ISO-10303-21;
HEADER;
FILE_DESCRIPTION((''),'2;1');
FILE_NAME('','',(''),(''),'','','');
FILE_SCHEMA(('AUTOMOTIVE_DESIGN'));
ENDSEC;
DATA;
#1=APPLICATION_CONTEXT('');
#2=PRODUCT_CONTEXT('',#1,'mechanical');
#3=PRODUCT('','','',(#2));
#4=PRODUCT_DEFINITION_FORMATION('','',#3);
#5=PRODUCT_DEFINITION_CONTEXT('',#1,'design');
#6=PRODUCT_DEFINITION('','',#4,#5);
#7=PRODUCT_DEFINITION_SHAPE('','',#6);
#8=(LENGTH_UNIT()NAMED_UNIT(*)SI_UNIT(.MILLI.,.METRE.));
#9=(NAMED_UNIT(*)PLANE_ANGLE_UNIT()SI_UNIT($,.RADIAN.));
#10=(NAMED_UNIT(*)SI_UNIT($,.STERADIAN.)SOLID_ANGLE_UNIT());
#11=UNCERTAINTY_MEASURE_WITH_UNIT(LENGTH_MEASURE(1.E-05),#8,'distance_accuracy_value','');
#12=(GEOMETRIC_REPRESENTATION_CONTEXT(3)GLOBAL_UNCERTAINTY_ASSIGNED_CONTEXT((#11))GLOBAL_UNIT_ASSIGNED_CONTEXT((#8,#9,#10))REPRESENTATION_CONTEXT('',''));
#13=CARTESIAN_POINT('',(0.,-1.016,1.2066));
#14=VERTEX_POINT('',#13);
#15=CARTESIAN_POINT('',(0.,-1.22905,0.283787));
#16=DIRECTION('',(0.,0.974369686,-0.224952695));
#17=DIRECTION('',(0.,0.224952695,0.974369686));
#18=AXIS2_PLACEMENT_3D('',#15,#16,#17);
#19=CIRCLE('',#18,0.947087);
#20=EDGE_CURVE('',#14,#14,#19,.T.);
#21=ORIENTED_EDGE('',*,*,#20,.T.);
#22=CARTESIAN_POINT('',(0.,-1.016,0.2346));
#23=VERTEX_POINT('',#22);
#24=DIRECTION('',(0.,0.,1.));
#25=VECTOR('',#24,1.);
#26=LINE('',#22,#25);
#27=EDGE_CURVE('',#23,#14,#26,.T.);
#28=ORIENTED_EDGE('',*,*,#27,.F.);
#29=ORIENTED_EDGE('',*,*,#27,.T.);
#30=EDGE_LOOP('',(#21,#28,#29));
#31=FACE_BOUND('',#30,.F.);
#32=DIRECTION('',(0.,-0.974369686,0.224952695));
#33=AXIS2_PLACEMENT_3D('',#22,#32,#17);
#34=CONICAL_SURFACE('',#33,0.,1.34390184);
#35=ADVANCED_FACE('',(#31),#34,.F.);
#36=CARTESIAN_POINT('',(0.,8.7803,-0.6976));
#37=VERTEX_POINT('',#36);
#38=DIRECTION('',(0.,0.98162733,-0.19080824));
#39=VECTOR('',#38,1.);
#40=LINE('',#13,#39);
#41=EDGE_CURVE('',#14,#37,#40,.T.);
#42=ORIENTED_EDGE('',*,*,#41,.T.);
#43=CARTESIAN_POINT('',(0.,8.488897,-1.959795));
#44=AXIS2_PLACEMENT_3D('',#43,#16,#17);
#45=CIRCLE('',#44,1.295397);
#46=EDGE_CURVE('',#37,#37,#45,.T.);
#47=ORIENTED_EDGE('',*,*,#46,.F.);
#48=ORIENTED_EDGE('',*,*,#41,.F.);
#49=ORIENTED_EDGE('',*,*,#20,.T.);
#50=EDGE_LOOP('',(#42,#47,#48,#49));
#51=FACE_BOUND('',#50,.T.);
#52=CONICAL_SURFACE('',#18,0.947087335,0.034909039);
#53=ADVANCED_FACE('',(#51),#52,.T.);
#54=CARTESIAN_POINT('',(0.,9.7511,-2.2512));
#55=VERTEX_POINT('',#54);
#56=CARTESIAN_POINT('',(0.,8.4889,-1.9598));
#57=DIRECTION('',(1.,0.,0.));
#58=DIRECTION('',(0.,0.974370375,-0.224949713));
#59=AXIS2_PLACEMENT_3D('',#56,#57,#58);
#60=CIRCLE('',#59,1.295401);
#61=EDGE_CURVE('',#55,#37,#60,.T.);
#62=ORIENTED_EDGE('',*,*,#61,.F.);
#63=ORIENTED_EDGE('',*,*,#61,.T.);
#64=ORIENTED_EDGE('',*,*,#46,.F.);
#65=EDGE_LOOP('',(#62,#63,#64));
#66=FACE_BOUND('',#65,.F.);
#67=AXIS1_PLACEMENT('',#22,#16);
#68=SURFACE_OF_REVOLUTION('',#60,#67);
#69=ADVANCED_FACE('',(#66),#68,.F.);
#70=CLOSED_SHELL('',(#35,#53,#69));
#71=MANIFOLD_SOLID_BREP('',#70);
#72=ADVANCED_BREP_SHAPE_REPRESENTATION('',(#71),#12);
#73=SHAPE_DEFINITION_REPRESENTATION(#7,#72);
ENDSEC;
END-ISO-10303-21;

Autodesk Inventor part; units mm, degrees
sketch "Sketch_1" plane through (0, 0, 0) normal (1, 0, 0) x (0, 1, 0)
  line L0 (9.7511, -2.2512) -> (-1.016, 0.2346)
  line L1 (-1.016, 0.2346) -> (-1.016, 1.2066)
  line L2 (-1.016, 1.2066) -> (8.7803, -0.6976)
  arc A0 (9.7511, -2.2512) -> (8.7803, -0.6976) centre (8.4889, -1.9598) ccw
  line L3 (9.7511, -2.2512) -> (-1.016, 0.2346)
revolve "Revolution1" add sketch "Sketch_1" angle 360 about axis through (0, 9.7511, -2.2512) along (0, 0.9743701, -0.2249511)
ref_plane "1_righta_vertical_XY" through (0, 0, 0) normal (0, 0, 1) x (1, 0, 0)
ref_plane "1_righta_vertical_YZ" through (0, 0, 0) normal (1, 0, 0) x (0, 1, 0)
ref_plane "1_righta_vertical_ZX" through (0, 0, 0) normal (0, 1, 0) x (0, 0, 1)
ref_plane "1_straight_XY" through (0, 0, 0) normal (0, 1, 0) x (1, 0, 0)
ref_plane "1_straight_YZ" through (0, 0, 0) normal (1, 0, 0) x (0, 0, -1)
ref_plane "1_straight_ZX" through (0, 0, 0) normal (0, 0, -1) x (0, 1, 0)
ref_plane "right_vertical_l_XY" through (0, 0, -6.9088) normal (0, 0, 1) x (1, 0, 0)
ref_plane "right_vertical_l_YZ" through (0, 0, -6.9088) normal (1, 0, 0) x (0, 1, 0)
ref_plane "right_vertical_l_ZX" through (0, 0, -6.9088) normal (0, 1, 0) x (0, 0, 1)
ref_plane "straight_l_XY" through (0, -6.9088, 0) normal (0, 1, 0) x (1, 0, 0)
ref_plane "straight_l_YZ" through (0, -6.9088, 0) normal (1, 0, 0) x (0, 0, -1)
ref_plane "straight_l_ZX" through (0, -6.9088, 0) normal (0, 0, -1) x (0, 1, 0)
properties part number "B12APtoggle"
